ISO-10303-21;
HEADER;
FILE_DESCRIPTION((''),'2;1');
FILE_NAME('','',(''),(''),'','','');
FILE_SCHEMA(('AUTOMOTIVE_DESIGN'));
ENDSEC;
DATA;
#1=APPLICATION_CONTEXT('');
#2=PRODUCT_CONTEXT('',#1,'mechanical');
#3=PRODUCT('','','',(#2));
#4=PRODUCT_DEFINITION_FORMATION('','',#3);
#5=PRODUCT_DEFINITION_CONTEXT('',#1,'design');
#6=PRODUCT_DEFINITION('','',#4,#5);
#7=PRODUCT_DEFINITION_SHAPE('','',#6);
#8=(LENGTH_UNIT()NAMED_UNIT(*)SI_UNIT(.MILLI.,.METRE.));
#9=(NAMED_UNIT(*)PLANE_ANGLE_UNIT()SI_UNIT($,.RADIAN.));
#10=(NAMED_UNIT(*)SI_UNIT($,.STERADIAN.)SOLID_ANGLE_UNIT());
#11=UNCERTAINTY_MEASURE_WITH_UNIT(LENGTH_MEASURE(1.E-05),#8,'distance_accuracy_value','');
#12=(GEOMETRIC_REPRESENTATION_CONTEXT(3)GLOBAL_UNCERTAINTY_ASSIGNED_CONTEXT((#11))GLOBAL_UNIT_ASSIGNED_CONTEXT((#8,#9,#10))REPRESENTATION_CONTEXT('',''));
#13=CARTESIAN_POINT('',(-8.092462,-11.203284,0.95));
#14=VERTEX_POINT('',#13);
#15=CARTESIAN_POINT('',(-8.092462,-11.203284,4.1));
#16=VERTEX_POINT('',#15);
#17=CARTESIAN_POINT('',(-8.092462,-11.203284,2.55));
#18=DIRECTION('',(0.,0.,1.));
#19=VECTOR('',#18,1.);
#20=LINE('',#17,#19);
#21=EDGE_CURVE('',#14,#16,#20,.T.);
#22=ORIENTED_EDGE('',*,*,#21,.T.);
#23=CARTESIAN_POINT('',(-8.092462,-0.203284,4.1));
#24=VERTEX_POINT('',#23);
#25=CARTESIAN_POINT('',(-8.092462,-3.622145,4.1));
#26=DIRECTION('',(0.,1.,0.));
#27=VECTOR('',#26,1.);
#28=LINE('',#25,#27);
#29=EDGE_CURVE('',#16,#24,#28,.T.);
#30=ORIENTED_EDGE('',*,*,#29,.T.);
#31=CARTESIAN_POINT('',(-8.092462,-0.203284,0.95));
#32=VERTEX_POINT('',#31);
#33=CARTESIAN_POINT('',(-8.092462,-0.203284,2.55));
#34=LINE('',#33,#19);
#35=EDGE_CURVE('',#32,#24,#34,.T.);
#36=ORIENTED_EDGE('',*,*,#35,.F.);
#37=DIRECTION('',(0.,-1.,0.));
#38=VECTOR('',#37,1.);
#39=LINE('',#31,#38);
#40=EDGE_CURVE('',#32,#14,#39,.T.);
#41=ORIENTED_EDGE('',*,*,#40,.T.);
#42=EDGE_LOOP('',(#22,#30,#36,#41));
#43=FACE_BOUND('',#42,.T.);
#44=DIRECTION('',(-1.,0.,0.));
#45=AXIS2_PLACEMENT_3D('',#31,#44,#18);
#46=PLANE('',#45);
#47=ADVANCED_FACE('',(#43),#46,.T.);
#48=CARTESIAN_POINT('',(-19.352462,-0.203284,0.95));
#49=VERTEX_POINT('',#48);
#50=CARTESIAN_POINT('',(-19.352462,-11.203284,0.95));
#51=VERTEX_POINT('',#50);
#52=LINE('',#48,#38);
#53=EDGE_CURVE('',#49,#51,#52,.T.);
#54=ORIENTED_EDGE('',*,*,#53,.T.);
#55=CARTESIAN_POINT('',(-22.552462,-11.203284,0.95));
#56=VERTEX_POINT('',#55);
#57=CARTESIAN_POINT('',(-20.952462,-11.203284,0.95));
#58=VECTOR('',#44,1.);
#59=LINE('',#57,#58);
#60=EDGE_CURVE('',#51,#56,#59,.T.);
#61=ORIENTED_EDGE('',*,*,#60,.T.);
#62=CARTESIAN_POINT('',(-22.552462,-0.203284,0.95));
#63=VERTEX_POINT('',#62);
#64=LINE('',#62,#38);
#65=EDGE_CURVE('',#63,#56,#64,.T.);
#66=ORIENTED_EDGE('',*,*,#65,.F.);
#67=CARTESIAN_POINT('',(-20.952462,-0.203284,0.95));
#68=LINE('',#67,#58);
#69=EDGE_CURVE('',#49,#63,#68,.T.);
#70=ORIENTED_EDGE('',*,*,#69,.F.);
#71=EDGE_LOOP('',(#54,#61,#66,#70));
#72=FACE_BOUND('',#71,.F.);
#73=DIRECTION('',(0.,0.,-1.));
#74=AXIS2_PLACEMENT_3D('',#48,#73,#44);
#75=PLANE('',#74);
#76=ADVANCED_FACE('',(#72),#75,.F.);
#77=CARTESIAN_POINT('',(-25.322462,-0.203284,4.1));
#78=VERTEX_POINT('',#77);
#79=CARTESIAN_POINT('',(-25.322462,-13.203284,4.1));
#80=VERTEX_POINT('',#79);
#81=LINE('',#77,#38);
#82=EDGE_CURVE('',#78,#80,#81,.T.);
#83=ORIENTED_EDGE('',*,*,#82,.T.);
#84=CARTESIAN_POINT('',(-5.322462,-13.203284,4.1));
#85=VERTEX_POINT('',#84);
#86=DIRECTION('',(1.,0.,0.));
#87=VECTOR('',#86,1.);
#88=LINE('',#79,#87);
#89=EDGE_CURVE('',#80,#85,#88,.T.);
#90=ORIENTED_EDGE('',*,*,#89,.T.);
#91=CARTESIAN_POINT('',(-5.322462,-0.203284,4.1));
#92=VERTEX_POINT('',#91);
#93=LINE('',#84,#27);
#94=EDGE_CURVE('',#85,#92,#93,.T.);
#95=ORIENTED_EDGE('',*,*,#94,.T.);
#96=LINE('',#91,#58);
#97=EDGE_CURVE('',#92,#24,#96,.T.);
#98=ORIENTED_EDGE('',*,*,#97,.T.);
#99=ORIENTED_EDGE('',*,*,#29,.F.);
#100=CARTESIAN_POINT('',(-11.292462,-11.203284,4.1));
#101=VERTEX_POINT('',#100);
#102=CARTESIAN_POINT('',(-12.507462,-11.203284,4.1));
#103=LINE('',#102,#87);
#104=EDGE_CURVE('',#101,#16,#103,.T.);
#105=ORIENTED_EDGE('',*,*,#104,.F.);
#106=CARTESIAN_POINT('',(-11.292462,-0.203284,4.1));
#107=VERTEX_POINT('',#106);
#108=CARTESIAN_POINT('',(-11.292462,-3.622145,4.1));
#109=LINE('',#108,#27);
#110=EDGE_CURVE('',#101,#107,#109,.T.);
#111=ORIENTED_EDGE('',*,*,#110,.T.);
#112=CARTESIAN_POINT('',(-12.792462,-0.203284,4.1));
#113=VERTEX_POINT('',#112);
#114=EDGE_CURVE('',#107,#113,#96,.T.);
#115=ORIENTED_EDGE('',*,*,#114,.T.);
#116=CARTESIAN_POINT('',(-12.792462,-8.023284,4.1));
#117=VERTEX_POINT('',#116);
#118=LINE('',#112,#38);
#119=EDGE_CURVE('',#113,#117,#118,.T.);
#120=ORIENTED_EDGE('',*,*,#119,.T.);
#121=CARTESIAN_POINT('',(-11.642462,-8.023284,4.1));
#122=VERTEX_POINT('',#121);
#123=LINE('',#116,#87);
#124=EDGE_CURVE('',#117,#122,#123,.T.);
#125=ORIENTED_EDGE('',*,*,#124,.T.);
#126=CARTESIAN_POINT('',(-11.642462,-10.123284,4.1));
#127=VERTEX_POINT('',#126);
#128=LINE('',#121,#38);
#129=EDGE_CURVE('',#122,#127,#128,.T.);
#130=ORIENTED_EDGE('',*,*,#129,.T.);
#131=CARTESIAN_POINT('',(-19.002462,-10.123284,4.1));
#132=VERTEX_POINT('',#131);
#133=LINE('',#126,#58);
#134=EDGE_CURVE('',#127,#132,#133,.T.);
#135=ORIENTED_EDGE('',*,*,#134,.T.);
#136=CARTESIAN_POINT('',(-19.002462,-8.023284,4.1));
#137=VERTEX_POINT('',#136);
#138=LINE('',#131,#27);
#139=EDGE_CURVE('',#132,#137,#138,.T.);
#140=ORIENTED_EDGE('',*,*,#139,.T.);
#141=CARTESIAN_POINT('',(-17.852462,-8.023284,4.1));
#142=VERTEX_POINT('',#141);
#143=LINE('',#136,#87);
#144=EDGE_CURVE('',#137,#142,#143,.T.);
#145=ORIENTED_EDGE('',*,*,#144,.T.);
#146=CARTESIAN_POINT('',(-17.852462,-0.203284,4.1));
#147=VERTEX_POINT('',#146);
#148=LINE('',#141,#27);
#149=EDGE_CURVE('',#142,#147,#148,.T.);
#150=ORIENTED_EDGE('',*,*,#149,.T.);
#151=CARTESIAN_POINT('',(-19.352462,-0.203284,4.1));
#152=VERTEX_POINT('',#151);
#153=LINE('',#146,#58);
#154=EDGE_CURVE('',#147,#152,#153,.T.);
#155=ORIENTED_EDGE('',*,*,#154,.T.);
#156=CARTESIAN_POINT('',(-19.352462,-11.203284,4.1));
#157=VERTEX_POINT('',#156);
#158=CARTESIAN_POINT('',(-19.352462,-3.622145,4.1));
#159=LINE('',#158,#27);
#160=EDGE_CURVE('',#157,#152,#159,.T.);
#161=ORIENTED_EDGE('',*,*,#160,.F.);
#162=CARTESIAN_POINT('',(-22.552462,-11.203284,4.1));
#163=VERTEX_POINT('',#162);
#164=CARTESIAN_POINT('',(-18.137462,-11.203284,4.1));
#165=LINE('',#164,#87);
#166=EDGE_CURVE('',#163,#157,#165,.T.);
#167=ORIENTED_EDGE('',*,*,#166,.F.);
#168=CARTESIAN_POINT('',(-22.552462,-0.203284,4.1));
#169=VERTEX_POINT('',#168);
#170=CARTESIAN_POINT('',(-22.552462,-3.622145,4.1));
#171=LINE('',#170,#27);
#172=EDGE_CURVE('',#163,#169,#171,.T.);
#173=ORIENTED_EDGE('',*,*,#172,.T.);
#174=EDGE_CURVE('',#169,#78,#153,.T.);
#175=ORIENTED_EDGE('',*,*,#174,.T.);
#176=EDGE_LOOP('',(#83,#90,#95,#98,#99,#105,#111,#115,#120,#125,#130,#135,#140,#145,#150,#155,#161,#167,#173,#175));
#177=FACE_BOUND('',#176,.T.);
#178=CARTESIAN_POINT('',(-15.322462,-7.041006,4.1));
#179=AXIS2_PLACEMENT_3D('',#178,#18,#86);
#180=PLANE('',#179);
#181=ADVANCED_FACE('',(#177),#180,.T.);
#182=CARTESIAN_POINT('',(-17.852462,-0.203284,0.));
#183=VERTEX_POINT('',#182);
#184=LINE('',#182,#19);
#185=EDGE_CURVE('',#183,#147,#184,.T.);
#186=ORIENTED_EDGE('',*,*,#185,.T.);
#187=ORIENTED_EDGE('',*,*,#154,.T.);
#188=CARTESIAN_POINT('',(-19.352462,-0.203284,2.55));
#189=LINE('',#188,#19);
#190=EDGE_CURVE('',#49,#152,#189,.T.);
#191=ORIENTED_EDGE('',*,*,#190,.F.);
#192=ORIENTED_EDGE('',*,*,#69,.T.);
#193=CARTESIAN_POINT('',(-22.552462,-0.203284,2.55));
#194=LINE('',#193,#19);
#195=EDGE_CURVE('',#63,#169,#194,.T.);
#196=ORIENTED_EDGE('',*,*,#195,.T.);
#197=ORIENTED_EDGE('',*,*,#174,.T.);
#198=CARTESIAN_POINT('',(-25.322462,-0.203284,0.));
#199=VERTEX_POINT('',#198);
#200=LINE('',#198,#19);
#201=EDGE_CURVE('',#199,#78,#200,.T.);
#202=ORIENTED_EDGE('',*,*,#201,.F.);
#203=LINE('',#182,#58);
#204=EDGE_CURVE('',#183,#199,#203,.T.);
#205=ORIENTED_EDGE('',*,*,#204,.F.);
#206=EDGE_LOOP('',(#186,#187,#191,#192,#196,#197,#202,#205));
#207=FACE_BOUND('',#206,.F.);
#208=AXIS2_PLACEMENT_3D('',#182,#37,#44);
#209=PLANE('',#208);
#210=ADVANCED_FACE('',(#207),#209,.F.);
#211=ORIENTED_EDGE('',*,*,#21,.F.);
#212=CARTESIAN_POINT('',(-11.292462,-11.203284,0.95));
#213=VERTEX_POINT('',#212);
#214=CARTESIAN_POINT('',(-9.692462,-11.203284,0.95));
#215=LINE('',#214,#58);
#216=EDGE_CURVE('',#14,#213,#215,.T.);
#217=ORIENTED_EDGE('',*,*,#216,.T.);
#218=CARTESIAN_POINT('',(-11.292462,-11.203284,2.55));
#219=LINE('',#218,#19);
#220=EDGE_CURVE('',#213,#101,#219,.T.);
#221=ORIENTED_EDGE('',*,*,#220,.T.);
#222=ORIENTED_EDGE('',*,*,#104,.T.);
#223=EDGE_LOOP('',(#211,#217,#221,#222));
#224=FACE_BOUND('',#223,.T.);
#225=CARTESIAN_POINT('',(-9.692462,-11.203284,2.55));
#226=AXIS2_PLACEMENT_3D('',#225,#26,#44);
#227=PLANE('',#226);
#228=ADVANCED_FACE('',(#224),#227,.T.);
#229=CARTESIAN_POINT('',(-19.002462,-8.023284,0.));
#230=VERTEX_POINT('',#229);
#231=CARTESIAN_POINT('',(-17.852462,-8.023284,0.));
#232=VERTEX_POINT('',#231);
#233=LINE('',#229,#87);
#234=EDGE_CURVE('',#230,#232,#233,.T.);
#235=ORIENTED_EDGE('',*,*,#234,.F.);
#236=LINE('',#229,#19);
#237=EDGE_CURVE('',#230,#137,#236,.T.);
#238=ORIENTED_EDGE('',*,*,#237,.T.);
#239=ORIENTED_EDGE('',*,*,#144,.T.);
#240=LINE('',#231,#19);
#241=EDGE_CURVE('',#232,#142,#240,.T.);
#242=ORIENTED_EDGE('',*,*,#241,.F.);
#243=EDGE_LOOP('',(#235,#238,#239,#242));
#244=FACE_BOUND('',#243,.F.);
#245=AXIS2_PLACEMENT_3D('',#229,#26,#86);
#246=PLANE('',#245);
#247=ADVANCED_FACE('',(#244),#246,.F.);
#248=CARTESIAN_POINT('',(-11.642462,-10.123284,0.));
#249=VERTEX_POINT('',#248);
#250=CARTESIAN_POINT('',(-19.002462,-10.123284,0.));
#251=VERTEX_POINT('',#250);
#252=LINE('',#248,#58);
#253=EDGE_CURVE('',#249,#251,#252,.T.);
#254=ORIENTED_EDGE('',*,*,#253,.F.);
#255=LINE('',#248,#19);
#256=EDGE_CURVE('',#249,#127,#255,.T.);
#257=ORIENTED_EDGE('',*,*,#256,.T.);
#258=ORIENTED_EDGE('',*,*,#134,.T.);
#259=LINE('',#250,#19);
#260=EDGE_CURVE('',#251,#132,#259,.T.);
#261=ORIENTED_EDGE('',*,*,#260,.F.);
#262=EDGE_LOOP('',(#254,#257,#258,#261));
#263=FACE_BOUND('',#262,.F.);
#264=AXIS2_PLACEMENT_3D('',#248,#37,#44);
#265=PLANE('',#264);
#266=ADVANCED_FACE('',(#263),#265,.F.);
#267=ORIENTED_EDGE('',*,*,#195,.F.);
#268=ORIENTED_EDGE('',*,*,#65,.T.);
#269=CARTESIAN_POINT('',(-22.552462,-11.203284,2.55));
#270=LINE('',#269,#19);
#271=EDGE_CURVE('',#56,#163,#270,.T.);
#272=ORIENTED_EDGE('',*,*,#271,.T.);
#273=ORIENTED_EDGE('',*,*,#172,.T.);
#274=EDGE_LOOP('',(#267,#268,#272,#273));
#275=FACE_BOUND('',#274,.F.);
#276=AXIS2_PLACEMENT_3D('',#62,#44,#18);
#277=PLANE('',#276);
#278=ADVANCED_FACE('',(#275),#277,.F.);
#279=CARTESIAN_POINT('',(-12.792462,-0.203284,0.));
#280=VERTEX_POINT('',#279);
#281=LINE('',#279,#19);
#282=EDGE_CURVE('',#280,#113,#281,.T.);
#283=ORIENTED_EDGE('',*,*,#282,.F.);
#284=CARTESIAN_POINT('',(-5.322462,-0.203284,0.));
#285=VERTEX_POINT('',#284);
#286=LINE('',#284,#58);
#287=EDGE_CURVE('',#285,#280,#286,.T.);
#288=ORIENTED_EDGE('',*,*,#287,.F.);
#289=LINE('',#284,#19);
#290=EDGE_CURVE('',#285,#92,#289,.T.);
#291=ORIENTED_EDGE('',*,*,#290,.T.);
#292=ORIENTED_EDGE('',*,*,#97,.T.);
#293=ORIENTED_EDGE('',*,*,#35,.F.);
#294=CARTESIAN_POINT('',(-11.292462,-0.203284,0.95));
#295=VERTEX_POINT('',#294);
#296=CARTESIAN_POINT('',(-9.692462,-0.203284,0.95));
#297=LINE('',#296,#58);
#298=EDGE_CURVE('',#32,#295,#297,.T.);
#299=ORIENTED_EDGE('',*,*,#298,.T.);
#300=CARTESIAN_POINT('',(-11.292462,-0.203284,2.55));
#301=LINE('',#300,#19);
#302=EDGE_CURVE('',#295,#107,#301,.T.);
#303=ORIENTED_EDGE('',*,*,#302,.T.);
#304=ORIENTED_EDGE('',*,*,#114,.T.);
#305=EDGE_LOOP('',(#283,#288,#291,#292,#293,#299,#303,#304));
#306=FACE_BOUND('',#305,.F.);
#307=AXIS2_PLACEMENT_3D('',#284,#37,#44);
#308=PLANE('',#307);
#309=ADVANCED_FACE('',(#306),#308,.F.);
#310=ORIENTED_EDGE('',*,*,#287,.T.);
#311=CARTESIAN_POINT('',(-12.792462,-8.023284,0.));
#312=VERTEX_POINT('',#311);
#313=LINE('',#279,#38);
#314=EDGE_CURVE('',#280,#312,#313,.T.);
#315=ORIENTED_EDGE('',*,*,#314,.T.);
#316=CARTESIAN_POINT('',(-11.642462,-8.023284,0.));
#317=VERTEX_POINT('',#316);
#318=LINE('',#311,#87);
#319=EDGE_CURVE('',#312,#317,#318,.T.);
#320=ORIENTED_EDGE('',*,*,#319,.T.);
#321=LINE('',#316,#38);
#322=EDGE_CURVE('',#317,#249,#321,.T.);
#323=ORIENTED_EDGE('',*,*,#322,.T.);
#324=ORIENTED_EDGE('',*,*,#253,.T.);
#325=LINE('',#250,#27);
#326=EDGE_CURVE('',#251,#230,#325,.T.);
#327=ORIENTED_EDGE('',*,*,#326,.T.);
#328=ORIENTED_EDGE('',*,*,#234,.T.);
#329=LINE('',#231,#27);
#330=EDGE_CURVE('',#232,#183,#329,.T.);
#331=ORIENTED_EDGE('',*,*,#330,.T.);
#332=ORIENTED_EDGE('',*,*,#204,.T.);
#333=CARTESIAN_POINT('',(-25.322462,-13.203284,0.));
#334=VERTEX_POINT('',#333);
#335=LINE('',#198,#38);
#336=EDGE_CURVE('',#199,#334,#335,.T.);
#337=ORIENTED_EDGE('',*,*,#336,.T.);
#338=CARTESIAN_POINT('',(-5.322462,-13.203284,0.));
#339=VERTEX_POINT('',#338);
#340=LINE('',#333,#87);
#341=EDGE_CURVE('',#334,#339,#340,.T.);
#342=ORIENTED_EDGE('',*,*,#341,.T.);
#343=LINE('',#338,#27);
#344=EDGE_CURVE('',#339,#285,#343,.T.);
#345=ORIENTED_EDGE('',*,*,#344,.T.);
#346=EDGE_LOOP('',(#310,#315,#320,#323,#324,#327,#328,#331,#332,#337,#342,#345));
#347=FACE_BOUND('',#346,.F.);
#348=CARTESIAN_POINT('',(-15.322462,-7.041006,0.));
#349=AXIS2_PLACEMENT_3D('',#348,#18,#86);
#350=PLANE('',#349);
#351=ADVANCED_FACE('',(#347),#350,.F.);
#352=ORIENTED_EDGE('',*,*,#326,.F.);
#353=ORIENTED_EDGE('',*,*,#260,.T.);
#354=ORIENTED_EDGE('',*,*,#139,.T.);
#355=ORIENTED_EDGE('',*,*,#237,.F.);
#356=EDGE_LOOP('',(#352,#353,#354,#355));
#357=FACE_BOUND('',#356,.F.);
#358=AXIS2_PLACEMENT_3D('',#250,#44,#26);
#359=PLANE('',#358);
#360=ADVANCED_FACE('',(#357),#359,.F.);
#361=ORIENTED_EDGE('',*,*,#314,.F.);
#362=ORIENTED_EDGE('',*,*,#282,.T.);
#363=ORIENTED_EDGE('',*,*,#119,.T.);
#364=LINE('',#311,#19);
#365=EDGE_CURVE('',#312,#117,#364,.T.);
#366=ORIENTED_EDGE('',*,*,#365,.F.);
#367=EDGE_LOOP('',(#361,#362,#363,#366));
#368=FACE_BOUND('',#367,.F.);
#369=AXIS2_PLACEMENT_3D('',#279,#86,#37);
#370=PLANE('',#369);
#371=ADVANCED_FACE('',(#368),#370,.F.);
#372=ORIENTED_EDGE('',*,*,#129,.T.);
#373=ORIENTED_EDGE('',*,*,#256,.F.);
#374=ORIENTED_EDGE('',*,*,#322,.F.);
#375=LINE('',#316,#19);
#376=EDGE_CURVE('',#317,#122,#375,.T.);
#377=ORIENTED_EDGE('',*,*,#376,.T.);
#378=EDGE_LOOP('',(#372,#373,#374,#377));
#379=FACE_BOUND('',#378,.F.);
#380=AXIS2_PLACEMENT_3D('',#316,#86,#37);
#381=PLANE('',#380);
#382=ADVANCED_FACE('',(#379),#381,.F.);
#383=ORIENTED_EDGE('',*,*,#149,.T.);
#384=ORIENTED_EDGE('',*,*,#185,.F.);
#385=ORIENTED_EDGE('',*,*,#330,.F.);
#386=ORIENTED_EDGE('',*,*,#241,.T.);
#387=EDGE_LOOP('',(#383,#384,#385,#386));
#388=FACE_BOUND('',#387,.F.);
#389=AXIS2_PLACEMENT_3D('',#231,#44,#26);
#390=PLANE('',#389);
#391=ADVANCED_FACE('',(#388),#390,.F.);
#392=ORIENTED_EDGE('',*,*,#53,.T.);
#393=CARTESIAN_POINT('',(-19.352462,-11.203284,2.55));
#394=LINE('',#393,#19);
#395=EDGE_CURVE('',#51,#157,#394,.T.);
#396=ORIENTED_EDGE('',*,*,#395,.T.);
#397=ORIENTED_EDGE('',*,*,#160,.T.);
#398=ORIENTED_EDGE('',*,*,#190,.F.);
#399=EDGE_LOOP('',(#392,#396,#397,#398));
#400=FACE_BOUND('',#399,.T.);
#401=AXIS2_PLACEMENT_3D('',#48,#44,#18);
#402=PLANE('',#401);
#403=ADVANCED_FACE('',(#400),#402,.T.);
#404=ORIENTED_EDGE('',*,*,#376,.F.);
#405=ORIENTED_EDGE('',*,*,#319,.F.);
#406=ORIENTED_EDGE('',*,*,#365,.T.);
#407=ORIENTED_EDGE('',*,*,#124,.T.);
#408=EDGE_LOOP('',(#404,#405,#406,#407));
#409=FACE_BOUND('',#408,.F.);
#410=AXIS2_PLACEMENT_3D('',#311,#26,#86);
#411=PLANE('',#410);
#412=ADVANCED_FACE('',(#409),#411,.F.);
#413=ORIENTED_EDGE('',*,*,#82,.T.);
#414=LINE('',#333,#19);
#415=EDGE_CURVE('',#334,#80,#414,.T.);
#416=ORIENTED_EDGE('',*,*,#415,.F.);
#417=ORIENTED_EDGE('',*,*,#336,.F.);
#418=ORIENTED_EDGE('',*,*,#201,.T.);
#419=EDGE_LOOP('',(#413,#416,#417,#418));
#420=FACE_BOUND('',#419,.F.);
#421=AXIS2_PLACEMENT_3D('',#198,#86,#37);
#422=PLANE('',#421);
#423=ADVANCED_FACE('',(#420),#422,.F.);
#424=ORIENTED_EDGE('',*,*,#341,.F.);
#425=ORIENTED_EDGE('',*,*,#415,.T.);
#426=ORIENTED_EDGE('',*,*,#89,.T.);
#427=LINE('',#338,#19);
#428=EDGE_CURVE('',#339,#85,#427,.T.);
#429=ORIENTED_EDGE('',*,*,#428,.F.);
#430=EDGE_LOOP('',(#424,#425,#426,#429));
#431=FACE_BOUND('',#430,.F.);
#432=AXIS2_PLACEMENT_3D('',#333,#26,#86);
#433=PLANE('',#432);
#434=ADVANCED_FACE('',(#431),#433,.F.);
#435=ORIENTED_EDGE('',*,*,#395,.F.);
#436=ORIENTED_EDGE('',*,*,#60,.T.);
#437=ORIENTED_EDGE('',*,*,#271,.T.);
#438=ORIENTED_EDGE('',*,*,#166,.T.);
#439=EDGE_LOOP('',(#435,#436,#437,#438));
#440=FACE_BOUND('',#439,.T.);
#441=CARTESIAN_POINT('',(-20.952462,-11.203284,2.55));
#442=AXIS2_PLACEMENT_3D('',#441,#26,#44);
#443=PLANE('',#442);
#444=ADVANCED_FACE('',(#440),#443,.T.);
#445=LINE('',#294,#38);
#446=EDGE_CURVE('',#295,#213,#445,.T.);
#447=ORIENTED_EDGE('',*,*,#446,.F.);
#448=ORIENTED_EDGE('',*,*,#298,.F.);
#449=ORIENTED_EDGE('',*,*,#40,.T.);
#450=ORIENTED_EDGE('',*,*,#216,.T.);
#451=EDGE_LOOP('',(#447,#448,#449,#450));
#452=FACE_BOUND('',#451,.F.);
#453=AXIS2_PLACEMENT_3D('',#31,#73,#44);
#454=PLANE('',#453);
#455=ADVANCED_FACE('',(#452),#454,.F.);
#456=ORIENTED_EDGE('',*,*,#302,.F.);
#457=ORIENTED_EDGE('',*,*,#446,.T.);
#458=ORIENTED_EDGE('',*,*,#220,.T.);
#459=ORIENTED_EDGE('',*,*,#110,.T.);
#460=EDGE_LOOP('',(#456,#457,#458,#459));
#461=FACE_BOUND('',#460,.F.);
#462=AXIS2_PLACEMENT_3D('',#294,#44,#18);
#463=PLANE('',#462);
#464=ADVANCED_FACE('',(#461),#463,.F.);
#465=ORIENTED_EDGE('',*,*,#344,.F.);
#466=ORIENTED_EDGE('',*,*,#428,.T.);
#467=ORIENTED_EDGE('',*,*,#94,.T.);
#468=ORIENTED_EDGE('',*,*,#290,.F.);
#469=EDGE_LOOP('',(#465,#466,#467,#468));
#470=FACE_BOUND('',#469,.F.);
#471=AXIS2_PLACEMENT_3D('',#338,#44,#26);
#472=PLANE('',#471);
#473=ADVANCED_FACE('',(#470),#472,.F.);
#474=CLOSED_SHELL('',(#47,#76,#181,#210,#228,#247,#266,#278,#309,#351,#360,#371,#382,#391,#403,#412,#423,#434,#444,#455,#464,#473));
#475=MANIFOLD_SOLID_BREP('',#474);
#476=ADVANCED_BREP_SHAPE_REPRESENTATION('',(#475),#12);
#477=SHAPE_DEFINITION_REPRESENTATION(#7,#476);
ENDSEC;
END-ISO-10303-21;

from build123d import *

# Parameters (mm, degrees)
F1_DEPTH = 5.1
F2_W     = 3.2
F2_H     = 3.2
F4_DEPTH = 11
F3_W     = 3.2
F3_H     = 3.2
F5_DEPTH = 11
F6_DEPTH = 1


# Not quite as in the source:
# - a feature names something its author has since deleted; it is built from what else it names


with BuildPart() as f1:
    # F0 (on Top) → F1 (new body)
    with BuildSketch(Plane.XY):
        Polygon((-17.8524617243, -0.2032842353), (-25.3224617243, -0.2032842353), (-25.3224617243, -13.2032842353), (-5.3224617243, -13.2032842353), (-5.3224617243, -0.2032842353), (-12.7924617243, -0.2032842353), (-12.7924617243, -8.0232842353), (-11.6424617243, -8.0232842353), (-11.6424617243, -10.1232842353), (-19.0024617243, -10.1232842353), (-19.0024617243, -8.0232842353), (-17.8524617243, -8.0232842353), align=None)
    extrude(amount=F1_DEPTH)

    # F2 (on face) → F4 (cut)
    with BuildSketch(Plane(origin=(0, -0.2032842353, 0), x_dir=(-1, 0, 0), z_dir=(0, 1, 0))):
        with Locations((9.6924617243, 2.55)):
            Rectangle(F2_W, F2_H)
    extrude(amount=-F4_DEPTH, mode=Mode.SUBTRACT)

    # F3 (on face) → F5 (cut)
    with BuildSketch(Plane(origin=(0, -0.2032842353, 0), x_dir=(-1, 0, 0), z_dir=(0, 1, 0))):
        with Locations((20.9524617243, 2.55)):
            Rectangle(F3_W, F3_H)
    extrude(amount=-F5_DEPTH, mode=Mode.SUBTRACT)

    # F6 (cut): a face of the model
    f6_faces = [f1.faces().sort_by_distance(p)[0] for p in [
        (-19.2409989331, -9.0732842353, 5.1),
    ]]
    extrude(f6_faces, amount=-F6_DEPTH, mode=Mode.SUBTRACT)


solid = f1.part
